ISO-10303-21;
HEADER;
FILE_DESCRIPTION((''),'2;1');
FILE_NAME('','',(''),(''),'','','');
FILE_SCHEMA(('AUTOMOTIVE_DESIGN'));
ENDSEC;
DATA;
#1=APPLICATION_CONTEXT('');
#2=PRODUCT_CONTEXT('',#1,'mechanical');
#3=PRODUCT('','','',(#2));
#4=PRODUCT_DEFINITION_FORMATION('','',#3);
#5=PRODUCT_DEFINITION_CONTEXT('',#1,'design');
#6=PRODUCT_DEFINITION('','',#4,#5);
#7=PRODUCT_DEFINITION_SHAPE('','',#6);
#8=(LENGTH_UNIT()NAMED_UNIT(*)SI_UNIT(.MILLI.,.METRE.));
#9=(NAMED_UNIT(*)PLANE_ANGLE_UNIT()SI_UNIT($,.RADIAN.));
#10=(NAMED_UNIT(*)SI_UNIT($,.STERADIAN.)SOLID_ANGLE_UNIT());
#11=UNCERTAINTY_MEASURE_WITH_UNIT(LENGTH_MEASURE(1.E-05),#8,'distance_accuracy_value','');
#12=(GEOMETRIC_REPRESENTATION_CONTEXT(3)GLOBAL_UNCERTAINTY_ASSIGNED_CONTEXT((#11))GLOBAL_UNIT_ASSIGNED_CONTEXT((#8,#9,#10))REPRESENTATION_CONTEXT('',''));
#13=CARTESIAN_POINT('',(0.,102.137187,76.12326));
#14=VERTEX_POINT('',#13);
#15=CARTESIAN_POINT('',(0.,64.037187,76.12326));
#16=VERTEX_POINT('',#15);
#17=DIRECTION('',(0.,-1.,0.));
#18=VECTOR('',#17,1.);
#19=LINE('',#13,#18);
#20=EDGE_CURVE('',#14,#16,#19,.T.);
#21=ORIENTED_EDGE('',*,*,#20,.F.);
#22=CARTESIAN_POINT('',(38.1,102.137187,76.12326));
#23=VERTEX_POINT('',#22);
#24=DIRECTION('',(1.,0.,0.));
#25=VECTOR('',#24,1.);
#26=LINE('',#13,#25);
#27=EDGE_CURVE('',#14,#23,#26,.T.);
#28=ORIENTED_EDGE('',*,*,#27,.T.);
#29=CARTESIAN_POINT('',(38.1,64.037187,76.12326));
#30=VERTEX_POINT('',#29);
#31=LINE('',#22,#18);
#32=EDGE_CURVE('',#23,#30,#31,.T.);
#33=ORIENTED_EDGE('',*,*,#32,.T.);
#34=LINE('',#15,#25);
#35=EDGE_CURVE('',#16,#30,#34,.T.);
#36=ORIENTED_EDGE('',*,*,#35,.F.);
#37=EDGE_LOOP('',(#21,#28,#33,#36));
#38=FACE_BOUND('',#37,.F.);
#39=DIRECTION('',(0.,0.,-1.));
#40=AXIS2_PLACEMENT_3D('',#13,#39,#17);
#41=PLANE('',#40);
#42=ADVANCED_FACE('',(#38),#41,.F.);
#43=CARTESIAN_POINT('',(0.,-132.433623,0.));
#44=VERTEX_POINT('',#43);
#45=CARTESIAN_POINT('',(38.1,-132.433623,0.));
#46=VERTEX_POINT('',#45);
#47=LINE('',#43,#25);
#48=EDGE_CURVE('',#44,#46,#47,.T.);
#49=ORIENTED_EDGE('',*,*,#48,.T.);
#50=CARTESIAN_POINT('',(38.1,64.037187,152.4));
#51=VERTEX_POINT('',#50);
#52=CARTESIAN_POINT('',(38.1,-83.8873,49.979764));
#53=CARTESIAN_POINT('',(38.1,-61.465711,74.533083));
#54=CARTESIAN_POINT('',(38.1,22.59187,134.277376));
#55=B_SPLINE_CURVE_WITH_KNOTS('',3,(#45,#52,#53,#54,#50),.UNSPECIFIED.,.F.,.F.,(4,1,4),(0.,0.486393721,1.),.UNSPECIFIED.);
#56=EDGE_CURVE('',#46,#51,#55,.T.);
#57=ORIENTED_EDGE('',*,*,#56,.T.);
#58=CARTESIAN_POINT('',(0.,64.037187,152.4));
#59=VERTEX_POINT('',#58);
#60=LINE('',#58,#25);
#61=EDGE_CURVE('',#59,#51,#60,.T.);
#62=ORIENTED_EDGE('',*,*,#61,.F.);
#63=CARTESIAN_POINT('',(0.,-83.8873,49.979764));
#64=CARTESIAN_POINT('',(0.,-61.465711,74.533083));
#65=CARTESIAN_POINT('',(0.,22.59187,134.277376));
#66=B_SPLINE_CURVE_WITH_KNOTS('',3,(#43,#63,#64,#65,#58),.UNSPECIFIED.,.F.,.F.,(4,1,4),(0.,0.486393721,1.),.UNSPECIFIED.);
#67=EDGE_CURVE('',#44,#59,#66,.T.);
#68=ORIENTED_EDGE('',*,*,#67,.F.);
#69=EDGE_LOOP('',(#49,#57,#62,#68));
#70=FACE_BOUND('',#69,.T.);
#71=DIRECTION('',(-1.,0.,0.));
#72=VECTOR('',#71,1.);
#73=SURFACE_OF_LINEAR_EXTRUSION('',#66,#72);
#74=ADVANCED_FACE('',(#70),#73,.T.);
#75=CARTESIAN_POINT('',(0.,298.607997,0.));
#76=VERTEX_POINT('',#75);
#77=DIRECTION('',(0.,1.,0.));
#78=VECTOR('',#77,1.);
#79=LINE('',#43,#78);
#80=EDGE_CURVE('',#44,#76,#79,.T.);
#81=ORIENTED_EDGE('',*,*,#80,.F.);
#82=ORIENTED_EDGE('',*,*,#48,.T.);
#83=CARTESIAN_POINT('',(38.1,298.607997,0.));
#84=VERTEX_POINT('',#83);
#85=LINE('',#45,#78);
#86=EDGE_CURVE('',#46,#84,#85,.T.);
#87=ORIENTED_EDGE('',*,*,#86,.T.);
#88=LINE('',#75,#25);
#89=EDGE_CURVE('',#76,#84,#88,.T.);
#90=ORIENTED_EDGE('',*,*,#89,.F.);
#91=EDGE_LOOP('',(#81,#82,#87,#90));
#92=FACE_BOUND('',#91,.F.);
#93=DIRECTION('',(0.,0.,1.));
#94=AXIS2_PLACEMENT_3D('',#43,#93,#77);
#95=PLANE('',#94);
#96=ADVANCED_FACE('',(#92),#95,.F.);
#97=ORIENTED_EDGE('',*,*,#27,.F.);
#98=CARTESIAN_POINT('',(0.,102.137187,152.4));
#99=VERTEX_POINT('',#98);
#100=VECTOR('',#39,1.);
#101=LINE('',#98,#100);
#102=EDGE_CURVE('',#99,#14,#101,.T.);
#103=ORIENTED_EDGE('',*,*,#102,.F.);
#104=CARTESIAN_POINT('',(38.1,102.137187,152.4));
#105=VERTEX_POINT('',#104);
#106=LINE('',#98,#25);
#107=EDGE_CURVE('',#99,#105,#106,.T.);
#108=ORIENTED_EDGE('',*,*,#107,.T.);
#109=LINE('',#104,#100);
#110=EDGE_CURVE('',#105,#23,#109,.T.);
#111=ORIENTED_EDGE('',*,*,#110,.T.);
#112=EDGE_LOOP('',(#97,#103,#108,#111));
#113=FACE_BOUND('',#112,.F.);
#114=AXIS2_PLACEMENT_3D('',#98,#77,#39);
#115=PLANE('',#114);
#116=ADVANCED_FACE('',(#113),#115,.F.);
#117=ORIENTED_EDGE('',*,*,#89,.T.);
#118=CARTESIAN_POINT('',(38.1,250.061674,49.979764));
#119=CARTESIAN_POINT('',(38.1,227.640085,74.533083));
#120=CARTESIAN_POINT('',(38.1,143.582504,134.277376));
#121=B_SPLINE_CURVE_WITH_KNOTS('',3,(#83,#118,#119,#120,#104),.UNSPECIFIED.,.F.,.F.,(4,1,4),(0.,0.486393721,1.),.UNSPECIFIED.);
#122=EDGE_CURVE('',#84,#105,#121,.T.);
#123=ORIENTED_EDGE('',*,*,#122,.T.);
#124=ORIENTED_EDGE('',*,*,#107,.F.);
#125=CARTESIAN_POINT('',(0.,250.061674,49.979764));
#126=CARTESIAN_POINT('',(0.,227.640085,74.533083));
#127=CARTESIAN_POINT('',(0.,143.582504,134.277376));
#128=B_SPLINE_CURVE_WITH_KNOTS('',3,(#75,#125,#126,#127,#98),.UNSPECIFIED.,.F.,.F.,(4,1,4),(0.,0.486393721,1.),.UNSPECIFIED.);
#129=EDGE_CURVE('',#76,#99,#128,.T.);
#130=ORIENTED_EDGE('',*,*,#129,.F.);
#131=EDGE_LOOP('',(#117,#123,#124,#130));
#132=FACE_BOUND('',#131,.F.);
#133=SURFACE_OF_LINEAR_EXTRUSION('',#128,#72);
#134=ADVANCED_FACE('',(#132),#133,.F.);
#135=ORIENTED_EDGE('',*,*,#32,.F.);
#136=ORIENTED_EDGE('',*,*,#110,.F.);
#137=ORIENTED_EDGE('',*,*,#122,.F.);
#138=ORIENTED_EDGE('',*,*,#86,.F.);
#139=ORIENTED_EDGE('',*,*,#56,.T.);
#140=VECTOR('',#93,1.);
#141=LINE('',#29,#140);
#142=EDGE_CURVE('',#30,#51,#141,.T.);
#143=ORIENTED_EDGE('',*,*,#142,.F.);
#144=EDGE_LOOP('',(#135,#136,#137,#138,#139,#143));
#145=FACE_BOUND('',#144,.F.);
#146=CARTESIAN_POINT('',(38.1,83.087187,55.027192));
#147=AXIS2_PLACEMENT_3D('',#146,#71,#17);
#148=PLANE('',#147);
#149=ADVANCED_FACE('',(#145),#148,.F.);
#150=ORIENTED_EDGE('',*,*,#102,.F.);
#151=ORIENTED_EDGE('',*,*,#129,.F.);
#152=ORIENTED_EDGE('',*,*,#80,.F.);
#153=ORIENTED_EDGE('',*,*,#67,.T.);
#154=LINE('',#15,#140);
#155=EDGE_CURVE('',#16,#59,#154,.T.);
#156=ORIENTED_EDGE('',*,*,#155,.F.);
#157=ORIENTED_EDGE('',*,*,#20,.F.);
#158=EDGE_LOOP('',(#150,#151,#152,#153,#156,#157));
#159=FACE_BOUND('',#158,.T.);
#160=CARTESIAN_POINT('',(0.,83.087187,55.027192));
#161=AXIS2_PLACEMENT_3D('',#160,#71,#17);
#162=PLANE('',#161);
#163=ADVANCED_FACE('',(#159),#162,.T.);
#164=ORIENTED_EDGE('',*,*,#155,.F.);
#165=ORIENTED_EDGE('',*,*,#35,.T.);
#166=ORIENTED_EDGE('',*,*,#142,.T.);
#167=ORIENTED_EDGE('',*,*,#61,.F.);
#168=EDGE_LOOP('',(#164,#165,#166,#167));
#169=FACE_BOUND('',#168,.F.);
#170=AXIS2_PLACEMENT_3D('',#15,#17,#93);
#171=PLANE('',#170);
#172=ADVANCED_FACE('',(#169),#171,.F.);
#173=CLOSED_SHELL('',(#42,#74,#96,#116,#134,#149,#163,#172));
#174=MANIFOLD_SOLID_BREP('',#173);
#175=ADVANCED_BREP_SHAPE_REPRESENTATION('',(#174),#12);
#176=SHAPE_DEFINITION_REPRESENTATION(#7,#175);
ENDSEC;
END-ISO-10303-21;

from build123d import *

# Parameters (mm, degrees)
F1_DEPTH = 38.1


with BuildPart() as f1:
    # F0 (on Right) → F1 (new body)
    with BuildSketch(Plane.YZ):
        with BuildLine():
            add(Edge.make_bspline(
                [(-132.4336230755, 0), (-83.8873000655, 49.9797638867), (-61.4657106946, 74.5330828615), (22.5918702379, 134.2773763467), (64.0371870756, 152.4)],
                knots=[0, 0, 0, 0, 0.4863937211, 1, 1, 1, 1], degree=3))
            Line((-132.4336230755, 0), (83.0871870756, 0))
            Line((83.0871870756, 0), (298.6079972267, 0))
            add(Edge.make_bspline(
                [(298.6079972267, 0), (250.0616742167, 49.9797638867), (227.6400848458, 74.5330828615), (143.5825039133, 134.2773763467), (102.1371870756, 152.4)],
                knots=[0, 0, 0, 0, 0.4863937211, 1, 1, 1, 1], degree=3))
            Line((102.1371870756, 152.4), (102.1371870756, 76.1232599616))
            Line((102.1371870756, 76.1232599616), (83.0871870756, 76.1232599616))
            Line((83.0871870756, 76.1232599616), (64.0371870756, 76.1232599616))
            Line((64.0371870756, 76.1232599616), (64.0371870756, 152.4))
        make_face()
    extrude(amount=F1_DEPTH)


solid = f1.part
